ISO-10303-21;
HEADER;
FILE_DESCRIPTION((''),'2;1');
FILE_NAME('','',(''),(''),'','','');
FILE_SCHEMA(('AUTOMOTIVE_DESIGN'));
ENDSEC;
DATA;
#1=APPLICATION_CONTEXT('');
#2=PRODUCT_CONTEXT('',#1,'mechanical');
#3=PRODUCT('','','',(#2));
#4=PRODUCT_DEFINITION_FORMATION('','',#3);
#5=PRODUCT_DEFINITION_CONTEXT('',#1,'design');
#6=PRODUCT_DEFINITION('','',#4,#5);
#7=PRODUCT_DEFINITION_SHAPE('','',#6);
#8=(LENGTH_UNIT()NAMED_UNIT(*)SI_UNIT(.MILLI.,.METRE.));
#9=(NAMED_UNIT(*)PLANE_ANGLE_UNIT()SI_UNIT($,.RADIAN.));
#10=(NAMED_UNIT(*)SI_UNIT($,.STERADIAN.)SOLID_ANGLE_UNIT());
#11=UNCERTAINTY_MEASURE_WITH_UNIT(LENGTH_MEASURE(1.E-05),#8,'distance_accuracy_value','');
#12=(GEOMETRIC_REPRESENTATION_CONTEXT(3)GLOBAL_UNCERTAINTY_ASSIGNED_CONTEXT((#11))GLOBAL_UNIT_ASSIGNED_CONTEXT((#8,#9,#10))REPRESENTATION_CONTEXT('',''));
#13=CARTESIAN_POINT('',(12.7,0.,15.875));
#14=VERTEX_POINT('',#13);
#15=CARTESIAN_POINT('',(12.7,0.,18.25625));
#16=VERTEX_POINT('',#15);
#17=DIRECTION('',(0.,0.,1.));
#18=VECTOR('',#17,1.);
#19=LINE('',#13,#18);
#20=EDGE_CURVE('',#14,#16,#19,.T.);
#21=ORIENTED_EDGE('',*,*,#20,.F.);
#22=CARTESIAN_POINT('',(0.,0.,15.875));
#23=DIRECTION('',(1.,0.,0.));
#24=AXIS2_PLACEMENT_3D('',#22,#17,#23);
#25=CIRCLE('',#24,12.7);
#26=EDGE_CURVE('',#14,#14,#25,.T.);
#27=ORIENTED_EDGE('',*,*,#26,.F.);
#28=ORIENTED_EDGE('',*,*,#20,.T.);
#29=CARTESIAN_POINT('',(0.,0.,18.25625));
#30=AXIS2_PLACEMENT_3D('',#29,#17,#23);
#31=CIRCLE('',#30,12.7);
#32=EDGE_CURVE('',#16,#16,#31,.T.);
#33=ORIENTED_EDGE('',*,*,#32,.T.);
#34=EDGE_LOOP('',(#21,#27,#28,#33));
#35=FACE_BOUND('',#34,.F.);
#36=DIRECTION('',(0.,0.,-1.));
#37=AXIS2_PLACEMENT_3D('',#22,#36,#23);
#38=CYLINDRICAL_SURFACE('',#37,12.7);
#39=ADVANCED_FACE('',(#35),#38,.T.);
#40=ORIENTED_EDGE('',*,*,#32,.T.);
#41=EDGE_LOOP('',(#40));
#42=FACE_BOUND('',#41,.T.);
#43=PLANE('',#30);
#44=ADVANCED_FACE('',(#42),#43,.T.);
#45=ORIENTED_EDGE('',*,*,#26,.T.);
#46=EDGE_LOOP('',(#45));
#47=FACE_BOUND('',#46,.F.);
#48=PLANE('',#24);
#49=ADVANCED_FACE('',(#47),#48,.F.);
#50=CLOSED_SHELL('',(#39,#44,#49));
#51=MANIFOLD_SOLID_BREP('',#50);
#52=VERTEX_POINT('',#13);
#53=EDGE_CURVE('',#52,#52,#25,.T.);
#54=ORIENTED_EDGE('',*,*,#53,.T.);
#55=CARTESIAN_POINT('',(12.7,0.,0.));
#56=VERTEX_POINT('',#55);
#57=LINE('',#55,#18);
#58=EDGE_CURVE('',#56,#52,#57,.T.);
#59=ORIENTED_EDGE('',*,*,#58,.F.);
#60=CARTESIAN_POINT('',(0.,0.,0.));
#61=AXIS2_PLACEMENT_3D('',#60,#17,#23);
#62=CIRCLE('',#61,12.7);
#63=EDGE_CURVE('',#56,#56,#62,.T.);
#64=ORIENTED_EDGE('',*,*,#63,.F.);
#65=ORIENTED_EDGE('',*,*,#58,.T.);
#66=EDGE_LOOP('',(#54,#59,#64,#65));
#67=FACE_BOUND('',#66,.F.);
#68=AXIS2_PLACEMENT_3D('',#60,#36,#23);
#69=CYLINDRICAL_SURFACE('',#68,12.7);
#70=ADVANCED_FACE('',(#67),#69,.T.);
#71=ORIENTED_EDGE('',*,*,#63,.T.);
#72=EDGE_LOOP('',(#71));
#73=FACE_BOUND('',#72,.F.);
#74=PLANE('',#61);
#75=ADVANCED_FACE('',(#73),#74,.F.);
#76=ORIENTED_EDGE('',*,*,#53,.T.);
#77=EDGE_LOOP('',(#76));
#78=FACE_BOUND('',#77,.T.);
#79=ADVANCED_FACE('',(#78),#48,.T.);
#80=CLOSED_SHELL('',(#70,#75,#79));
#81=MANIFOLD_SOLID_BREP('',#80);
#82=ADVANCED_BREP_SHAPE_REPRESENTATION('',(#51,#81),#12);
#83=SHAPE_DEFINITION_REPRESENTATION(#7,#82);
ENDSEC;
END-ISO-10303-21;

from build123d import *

# Parameters (mm, degrees)
F0_R     = 12.7
F1_DEPTH = 15.875
F2_R     = 12.7
F3_DEPTH = 2.38125


# Not quite as in the source:
# - a length typed as a fraction of an inch, garbled in the dataset ("3 / 203.2 mm" for 3/8 in), is restored


with BuildPart() as f1:
    # F0 (on Top) → F1 (new body)
    with BuildSketch(Plane.XY):
        Circle(F0_R)
    extrude(amount=F1_DEPTH)


with BuildPart() as f3:
    # F2 (on face) → F3 (new body)
    with BuildSketch(Plane.XY.offset(15.875)):
        Circle(F2_R)
    extrude(amount=F3_DEPTH)


solid = Compound([f1.part, f3.part])
